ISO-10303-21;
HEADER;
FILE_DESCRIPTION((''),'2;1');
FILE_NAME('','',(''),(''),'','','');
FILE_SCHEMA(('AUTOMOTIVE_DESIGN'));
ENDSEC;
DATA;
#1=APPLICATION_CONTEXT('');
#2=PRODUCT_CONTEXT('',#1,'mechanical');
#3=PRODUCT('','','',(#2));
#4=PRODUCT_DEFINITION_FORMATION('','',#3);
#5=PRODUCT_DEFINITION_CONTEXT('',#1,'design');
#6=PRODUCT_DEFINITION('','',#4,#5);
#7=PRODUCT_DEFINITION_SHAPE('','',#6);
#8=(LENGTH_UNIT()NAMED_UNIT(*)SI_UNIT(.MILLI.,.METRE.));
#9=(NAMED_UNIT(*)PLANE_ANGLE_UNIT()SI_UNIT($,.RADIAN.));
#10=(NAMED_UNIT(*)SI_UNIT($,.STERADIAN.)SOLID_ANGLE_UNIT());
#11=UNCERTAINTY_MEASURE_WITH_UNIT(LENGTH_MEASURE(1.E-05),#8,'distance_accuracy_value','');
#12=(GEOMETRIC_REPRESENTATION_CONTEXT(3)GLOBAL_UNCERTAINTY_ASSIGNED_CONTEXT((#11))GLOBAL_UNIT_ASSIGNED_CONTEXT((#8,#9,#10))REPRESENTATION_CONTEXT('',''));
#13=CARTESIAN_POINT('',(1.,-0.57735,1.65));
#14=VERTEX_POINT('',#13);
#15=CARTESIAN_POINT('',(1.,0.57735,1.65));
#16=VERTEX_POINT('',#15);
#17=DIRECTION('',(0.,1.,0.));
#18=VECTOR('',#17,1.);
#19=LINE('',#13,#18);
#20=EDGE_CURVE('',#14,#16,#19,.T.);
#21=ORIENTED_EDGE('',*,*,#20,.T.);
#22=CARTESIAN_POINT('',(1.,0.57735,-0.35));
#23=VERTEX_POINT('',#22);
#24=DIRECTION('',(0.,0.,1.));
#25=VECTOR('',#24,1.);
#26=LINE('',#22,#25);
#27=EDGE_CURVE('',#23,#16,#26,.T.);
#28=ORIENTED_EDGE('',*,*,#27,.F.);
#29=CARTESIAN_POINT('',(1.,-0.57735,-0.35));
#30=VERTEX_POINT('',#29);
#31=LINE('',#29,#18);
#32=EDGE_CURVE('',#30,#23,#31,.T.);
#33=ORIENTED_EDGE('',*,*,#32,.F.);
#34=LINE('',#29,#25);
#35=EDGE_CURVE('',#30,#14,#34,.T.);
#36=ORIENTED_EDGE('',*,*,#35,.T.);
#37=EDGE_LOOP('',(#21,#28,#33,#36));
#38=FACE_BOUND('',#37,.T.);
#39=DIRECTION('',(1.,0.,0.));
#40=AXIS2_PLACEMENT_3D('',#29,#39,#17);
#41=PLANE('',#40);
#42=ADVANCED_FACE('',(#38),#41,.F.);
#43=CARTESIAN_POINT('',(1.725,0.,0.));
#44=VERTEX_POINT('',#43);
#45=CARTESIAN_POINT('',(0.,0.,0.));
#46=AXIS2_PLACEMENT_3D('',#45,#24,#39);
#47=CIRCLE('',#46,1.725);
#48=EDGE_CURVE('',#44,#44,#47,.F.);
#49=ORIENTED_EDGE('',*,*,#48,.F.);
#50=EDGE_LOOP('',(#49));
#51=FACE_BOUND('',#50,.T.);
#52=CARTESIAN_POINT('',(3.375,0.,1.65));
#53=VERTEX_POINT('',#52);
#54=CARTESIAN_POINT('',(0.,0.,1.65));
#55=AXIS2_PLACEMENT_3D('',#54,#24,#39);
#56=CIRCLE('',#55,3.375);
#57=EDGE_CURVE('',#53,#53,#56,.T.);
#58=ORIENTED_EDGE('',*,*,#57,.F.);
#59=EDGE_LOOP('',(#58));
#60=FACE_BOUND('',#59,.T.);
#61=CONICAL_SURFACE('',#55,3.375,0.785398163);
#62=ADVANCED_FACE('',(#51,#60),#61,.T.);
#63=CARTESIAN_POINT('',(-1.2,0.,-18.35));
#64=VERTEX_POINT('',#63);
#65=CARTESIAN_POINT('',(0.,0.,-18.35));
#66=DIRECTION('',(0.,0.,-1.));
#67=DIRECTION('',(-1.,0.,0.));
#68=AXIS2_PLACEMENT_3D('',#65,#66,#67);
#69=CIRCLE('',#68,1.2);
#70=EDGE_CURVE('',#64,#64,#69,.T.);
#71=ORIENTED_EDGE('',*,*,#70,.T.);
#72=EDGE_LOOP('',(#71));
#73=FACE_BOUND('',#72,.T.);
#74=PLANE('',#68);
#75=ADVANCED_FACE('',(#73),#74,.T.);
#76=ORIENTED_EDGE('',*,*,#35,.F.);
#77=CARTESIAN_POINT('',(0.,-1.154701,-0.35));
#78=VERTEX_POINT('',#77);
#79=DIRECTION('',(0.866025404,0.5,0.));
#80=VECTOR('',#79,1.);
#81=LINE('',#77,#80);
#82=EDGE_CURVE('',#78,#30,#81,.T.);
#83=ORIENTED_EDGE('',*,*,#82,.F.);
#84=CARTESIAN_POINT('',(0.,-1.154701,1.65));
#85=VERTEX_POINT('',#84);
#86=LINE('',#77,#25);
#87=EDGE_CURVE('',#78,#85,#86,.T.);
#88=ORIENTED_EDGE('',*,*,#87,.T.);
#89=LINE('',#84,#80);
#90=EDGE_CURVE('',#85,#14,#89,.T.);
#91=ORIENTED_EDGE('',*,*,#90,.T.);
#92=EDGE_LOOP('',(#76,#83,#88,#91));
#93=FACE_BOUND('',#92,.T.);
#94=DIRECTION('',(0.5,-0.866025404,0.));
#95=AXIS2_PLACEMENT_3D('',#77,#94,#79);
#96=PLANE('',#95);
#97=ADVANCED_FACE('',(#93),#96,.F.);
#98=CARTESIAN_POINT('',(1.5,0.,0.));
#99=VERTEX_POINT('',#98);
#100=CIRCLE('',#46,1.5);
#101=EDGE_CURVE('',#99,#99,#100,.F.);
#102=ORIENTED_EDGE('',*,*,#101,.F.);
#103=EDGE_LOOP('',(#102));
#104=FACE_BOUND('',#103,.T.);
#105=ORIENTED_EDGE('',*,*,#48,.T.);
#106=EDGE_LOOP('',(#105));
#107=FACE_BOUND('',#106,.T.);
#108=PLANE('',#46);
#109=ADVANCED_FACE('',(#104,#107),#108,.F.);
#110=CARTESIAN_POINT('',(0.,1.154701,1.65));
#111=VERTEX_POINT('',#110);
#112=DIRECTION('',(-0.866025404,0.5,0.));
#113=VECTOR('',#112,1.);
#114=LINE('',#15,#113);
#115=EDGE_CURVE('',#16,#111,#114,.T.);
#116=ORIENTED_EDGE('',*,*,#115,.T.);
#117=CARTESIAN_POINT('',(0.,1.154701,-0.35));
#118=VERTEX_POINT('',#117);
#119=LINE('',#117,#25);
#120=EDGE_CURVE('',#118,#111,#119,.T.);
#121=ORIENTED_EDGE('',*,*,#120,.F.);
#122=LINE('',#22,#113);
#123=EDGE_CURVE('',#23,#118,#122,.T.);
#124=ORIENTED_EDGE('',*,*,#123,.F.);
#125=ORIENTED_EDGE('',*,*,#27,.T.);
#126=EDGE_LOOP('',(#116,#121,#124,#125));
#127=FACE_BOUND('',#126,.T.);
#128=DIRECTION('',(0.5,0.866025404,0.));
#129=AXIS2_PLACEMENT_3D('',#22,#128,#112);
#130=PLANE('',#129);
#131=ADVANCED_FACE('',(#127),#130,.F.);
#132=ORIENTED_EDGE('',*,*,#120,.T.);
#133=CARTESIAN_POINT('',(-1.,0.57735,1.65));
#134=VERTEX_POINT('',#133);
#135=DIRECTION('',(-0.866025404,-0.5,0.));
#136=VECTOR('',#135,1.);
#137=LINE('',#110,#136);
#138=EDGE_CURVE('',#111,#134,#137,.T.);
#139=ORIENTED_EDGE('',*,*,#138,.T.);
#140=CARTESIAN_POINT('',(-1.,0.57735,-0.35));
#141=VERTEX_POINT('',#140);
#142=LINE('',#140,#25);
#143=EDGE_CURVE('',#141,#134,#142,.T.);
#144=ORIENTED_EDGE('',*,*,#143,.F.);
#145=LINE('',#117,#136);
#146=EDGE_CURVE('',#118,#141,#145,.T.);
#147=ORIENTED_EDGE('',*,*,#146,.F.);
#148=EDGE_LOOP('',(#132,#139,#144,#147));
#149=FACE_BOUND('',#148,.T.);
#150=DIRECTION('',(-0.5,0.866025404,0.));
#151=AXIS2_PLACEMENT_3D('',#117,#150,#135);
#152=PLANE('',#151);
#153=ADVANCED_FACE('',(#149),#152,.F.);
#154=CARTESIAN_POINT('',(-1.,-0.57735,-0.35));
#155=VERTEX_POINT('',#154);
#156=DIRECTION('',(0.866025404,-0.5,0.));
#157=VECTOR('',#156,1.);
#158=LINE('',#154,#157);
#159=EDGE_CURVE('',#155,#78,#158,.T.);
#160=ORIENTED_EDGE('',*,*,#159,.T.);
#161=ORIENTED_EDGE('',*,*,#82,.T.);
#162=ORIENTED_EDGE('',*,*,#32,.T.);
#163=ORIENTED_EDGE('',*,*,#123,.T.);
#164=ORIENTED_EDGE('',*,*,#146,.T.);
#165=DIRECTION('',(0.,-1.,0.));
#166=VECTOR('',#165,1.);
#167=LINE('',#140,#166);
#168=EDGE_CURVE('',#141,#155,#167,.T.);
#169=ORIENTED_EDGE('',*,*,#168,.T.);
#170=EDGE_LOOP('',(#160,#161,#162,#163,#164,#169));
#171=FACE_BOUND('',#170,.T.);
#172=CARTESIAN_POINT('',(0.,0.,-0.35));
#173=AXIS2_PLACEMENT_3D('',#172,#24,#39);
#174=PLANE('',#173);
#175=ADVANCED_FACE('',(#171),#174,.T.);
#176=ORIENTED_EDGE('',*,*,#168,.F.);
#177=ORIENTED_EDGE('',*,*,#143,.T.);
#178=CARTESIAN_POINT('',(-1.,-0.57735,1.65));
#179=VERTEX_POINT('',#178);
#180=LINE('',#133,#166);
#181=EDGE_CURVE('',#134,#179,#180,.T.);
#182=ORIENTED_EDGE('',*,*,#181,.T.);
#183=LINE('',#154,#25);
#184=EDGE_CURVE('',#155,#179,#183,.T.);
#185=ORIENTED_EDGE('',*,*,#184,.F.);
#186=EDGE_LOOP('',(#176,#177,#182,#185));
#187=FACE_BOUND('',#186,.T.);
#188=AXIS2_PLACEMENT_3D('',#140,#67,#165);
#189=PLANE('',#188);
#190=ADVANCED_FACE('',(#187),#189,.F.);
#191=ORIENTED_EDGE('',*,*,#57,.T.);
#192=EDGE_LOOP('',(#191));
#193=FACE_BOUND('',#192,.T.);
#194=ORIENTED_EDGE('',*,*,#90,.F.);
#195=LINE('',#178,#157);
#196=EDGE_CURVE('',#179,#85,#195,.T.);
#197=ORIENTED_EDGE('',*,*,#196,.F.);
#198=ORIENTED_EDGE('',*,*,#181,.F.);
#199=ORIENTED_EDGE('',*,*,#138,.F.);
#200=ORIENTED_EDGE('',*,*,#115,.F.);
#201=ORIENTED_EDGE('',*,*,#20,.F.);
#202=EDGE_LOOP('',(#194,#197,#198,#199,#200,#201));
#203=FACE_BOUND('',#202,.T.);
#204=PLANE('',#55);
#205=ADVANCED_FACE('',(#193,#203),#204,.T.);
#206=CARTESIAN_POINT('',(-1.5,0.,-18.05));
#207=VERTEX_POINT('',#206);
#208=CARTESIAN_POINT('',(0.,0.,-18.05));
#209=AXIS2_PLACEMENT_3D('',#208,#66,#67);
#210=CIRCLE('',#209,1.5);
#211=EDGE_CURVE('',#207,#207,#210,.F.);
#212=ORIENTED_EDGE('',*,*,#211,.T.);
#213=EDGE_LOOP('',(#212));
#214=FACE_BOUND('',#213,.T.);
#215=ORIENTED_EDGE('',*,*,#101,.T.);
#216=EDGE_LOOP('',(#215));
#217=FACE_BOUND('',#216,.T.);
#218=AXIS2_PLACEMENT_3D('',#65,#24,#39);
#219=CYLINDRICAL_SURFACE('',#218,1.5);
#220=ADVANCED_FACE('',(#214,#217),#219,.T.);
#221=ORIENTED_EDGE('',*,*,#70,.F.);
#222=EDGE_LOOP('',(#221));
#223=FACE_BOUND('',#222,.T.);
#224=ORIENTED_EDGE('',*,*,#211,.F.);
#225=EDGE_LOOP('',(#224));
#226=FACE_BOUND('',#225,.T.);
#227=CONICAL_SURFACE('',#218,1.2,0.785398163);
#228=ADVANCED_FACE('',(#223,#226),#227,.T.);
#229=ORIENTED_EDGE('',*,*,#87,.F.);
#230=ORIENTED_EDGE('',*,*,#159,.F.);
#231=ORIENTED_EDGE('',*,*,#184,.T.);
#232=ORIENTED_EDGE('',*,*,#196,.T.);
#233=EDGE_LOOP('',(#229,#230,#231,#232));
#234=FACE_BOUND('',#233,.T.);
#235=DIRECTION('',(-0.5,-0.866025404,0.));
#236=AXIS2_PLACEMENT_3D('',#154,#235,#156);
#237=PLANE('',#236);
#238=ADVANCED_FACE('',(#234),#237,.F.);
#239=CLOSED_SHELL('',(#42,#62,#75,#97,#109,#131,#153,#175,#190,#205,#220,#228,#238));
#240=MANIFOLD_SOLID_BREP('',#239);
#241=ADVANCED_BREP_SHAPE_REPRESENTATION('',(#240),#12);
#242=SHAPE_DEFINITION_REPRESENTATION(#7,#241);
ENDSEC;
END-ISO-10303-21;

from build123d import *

# Parameters (mm, degrees)
SKETCH1_R           = 3.375
BOSS_EXTRUDE1_DEPTH = 1.65
SKETCH2_R           = 1.5
BOSS_EXTRUDE2_DEPTH = 18.35
CHAMFER1_SIZE       = 0.3
CUT_EXTRUDE1_DEPTH  = 2
CHAMFER2_SIZE       = 1.65


with BuildPart() as part:
    # Sketch1 → Boss-Extrude1 (new body)
    with BuildSketch(Plane.XY):
        Circle(SKETCH1_R)
    extrude(amount=BOSS_EXTRUDE1_DEPTH)

    # Sketch2 → Boss-Extrude2 (add)
    with BuildSketch(Plane(origin=(0, 0, 0), x_dir=(-1, 0, 0), z_dir=(0, 0, -1))):
        with Locations(Location((0, 0, 0), (0, 0, 180))):
            Circle(SKETCH2_R)
    extrude(amount=BOSS_EXTRUDE2_DEPTH)

    # Chamfer1
    chamfer1_edges = [part.edges().sort_by_distance(p)[0] for p in [
        (-1.5, 0, -18.35),
    ]]
    chamfer(chamfer1_edges, length=CHAMFER1_SIZE)

    # Sketch3 → Cut-Extrude1 (cut)
    with BuildSketch(Plane.XY.offset(1.65)):
        Polygon((0, 1.154700538), (-1, 0.577350269), (-1, -0.577350269), (0, -1.154700538), (1, -0.577350269), (1, 0.577350269), align=None)
    extrude(amount=-CUT_EXTRUDE1_DEPTH, mode=Mode.SUBTRACT)

    # Chamfer2
    chamfer2_edges = [part.edges().sort_by_distance(p)[0] for p in [
        (-3.375, 0, 0),
    ]]
    chamfer(chamfer2_edges, length=CHAMFER2_SIZE - 0.0001)  # a hair under: the kernel refuses the full size


solid = part.part
